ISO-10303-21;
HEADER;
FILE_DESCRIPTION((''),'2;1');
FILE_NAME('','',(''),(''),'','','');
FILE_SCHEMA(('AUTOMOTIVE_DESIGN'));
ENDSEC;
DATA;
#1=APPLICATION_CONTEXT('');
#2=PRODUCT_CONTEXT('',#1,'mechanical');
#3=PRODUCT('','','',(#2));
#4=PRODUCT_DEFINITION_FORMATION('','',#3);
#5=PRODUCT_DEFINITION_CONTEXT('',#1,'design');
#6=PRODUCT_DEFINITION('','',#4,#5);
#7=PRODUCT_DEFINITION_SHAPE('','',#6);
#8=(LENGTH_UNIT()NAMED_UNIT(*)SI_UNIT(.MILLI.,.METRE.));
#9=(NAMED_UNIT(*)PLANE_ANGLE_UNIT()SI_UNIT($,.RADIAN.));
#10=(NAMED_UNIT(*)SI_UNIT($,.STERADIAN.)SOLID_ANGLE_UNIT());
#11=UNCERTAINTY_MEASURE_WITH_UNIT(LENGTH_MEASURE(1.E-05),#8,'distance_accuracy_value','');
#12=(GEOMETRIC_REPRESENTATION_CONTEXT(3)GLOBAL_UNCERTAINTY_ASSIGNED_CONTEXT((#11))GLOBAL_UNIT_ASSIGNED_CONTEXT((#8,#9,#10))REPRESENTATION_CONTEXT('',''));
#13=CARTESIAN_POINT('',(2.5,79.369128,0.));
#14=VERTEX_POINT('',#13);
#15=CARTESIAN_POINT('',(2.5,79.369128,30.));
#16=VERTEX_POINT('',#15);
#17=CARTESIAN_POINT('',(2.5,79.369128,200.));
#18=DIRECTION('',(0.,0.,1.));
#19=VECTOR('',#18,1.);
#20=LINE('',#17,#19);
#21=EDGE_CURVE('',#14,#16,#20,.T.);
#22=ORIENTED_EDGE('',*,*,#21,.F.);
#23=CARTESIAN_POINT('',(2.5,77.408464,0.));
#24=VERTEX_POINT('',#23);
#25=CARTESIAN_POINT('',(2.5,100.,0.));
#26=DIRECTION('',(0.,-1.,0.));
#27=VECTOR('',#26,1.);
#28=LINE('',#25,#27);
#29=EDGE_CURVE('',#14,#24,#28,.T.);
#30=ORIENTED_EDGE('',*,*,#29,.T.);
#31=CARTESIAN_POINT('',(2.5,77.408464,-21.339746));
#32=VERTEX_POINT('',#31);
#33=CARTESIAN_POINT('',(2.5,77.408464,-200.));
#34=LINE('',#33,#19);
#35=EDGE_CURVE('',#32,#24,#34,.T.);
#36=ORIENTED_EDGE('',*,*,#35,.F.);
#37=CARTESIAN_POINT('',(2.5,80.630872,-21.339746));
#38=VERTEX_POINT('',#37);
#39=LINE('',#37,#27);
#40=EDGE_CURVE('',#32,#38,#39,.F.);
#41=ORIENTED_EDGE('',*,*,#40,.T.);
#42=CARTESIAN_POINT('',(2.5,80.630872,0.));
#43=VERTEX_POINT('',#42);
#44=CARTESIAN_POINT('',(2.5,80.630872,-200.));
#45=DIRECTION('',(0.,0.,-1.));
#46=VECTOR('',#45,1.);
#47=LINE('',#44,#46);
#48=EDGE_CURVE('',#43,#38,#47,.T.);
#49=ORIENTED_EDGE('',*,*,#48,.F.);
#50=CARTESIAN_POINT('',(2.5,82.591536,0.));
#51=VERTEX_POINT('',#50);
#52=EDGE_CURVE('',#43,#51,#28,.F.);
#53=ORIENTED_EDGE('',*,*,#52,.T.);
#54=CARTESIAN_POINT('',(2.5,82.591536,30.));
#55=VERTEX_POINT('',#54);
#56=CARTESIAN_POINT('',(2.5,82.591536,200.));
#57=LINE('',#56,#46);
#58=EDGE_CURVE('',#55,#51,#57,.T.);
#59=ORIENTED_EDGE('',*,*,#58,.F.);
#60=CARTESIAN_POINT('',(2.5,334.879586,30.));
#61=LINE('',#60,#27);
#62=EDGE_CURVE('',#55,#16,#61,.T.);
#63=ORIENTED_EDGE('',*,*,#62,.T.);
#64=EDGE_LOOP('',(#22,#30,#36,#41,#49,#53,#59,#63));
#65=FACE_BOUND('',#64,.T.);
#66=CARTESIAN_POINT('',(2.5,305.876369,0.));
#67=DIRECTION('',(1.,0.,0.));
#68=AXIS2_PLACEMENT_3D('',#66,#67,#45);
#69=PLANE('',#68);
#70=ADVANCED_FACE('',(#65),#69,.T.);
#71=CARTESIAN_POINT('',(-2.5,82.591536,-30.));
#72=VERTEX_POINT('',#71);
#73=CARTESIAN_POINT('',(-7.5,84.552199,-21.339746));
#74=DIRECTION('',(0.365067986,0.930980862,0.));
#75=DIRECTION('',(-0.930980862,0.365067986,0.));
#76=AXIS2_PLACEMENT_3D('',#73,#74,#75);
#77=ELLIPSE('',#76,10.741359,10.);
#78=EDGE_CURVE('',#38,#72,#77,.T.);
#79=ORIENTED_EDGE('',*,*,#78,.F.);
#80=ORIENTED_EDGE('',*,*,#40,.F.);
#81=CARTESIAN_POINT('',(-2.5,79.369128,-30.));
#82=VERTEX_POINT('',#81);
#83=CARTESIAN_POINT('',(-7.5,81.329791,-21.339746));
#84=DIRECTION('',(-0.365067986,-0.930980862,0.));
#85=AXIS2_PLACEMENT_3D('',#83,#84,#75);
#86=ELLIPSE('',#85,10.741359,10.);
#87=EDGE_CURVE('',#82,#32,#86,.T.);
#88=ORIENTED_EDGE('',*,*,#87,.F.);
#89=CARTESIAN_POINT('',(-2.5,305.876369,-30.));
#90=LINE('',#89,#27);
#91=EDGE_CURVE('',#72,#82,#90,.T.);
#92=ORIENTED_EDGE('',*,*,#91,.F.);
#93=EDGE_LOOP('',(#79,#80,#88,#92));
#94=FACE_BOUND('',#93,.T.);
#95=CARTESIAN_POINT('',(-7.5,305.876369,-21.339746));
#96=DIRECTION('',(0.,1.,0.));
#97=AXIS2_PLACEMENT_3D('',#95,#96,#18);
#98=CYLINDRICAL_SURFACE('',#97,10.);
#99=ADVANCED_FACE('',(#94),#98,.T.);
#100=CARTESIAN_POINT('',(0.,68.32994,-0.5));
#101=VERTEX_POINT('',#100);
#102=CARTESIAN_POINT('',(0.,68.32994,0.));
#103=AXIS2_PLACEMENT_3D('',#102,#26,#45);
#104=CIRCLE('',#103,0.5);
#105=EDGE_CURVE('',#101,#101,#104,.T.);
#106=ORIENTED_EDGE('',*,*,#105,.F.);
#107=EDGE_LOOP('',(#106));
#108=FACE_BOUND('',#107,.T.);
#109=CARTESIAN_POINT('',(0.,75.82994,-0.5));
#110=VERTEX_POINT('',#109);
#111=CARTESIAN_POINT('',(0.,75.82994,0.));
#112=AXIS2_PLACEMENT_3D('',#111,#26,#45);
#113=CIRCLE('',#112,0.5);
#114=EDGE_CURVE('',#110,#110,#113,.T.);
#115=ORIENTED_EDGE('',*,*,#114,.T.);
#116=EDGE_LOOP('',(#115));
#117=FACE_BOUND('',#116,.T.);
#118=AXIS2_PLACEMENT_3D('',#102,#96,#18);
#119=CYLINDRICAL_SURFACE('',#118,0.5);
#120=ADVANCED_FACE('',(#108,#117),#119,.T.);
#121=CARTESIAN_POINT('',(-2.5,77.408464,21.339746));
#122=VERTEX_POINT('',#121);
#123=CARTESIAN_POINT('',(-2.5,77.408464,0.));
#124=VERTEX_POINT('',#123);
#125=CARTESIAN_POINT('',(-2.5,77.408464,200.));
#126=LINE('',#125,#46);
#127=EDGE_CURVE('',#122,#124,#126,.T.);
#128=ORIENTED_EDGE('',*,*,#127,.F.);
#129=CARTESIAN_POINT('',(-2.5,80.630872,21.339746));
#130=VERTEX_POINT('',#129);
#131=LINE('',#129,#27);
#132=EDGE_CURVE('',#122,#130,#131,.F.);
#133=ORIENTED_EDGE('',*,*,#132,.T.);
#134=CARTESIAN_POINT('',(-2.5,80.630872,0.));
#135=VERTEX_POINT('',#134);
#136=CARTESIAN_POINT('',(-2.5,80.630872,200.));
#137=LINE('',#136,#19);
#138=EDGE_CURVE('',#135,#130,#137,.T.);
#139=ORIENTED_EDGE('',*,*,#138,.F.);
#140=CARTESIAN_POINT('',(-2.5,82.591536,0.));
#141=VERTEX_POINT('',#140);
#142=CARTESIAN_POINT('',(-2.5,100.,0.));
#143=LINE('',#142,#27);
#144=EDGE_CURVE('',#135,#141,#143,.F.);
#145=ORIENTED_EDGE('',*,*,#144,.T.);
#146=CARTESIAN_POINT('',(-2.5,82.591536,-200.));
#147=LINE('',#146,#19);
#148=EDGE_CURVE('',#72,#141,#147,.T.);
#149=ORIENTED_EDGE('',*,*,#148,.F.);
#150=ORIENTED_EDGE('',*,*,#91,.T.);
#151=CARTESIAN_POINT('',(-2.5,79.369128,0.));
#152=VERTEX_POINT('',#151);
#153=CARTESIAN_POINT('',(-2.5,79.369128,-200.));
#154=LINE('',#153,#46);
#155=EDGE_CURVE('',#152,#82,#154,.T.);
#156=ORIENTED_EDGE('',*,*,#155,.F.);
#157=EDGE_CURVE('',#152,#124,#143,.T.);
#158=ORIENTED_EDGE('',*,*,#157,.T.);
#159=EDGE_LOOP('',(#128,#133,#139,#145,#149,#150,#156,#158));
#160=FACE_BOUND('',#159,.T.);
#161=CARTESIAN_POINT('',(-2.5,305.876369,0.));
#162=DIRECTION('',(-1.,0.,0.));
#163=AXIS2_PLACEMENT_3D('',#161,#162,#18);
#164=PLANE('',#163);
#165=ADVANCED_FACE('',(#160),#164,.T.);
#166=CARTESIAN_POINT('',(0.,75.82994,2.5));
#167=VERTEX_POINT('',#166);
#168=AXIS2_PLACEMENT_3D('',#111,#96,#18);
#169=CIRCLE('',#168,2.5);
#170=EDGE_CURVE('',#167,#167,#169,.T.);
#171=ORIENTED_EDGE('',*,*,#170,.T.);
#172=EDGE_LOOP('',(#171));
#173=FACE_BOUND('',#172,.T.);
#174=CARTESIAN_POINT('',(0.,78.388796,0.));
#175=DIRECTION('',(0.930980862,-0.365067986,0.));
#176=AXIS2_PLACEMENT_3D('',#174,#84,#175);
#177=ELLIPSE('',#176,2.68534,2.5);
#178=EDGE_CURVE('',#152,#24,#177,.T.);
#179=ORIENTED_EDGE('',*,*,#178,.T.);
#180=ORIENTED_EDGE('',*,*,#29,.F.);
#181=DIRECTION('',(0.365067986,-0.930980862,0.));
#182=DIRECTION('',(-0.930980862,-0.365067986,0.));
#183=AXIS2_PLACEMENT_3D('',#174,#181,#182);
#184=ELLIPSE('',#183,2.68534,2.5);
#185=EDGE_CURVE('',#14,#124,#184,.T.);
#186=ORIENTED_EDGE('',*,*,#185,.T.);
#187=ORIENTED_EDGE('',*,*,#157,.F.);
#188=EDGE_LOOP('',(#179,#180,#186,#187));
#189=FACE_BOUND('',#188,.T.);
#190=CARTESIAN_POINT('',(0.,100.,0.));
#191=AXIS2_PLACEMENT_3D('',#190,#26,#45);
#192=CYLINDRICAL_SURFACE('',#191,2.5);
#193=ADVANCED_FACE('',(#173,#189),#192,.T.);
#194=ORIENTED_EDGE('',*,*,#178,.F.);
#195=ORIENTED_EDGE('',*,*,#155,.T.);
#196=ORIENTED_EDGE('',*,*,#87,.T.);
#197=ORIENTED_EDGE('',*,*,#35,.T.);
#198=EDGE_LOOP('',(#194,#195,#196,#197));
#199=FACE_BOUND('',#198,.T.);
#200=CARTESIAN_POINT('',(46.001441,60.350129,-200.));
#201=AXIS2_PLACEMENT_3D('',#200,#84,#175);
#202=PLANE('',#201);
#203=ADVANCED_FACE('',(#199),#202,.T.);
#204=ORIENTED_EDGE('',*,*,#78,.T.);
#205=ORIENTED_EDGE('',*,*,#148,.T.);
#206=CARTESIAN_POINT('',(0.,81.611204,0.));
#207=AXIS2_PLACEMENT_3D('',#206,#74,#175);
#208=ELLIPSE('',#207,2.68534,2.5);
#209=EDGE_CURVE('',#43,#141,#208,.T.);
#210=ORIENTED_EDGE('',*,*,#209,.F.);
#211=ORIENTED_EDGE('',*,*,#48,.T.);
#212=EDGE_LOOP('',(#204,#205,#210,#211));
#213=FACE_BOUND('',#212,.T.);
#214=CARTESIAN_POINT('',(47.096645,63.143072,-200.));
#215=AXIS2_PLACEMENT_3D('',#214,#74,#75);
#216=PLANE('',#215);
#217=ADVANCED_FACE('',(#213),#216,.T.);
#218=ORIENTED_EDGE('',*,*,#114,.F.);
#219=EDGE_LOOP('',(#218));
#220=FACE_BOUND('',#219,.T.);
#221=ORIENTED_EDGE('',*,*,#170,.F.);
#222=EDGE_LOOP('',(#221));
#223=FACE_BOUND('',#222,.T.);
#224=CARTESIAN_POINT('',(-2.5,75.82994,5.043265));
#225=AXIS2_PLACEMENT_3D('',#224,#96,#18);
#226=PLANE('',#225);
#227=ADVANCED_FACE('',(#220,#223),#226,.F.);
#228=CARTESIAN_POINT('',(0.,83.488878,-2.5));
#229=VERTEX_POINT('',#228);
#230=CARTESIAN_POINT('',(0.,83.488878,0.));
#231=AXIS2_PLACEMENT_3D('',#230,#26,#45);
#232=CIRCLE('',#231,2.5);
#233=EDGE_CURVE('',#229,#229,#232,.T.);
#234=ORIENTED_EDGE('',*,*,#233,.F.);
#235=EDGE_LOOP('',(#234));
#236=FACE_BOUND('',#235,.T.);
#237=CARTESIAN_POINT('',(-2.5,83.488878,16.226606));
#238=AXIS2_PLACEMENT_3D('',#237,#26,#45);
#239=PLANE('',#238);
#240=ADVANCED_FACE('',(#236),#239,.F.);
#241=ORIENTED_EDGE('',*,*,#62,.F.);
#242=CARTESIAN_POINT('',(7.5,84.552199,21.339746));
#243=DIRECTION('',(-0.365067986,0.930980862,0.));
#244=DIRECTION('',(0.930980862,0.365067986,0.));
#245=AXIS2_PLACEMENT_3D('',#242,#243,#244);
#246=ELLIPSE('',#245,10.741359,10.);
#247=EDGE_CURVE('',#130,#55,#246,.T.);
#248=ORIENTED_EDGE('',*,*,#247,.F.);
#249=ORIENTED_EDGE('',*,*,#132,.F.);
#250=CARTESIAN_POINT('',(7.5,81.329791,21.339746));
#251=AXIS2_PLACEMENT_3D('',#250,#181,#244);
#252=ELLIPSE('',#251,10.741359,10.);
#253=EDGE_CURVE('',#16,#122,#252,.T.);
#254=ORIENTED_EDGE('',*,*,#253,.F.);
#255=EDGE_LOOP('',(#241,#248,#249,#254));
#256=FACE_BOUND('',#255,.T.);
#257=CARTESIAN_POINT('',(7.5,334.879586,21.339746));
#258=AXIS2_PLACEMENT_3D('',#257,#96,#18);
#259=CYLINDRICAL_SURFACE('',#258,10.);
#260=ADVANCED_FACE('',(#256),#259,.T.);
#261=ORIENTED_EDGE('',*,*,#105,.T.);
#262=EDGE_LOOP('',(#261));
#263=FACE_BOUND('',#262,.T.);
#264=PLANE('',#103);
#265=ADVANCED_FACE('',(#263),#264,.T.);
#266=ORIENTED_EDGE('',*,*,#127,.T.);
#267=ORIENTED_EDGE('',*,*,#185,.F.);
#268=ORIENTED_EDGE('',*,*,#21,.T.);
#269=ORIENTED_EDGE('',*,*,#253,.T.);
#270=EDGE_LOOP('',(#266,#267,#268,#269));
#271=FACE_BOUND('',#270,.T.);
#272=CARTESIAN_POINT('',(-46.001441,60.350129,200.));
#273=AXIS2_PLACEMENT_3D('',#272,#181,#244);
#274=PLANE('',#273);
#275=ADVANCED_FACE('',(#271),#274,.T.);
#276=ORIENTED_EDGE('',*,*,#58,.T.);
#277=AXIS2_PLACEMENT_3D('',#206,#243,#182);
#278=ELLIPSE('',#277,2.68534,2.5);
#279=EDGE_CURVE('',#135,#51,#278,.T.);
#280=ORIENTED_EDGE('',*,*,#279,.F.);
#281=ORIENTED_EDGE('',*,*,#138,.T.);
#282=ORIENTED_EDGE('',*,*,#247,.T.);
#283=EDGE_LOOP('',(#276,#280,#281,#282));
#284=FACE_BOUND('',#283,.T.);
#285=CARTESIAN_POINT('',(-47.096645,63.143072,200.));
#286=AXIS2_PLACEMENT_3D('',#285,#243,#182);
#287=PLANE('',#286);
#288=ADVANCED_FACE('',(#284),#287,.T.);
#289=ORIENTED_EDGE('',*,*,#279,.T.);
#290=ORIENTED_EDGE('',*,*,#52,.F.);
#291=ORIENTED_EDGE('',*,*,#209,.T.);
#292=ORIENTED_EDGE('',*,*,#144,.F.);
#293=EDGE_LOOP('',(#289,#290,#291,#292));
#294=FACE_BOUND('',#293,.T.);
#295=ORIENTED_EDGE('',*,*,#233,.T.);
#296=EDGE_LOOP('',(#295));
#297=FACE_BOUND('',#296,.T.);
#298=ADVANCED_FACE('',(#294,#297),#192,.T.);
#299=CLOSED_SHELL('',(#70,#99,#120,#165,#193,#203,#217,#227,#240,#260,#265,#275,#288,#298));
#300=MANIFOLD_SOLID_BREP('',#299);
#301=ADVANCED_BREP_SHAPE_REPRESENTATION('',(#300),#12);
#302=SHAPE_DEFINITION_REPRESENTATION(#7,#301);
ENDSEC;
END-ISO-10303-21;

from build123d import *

# Parameters (mm, degrees)
SKETCH2_R                = 2.5
BOSS_EXTRUDE1_DEPTH      = 100
BOSS_EXTRUDE2_DEPTH      = 200
CUT_EXTRUDE5_START       = 60.350129398
CUT_EXTRUDE5_DEPTH       = 39.299741204
CIRPATTERN2_COUNT        = 2
CUT_EXTRUDE13_START      = 60.350129398
CUT_EXTRUDE13_DEPTH      = 39.299741204
FILLET1_R                = 10
FILLET2_R                = 10
CUT_EXTRUDE14_DEPTH      = 105.432992871
CUT_EXTRUDE14_DEPTH_BACK = 105.432992871
SKETCH14_W               = 44.068346903
SKETCH14_H               = 27.8913588
CUT_EXTRUDE15_DEPTH      = 91.768685539
CUT_EXTRUDE15_DEPTH_BACK = 91.768685539
SKETCH15_W               = 22.136968411
SKETCH15_H               = 5.24183176
CUT_EXTRUDE16_DEPTH      = 89.750452329
CUT_EXTRUDE16_DEPTH_BACK = 89.750452329
SKETCH16_W               = 11.028183549
SKETCH16_H               = 76.248198314
CUT_EXTRUDE17_DEPTH      = 89.750452329
CUT_EXTRUDE17_DEPTH_BACK = 89.750452329
SKETCH19_W               = 10.280501296
SKETCH19_H               = 4.008748932
SKETCH20_R               = 0.5
BOSS_EXTRUDE3_DEPTH      = 7.5


# Read off the part's stored shape, not the designer's step: Cut-Extrude5, Cut-Extrude13
with BuildPart() as part:
    # Sketch2 → Boss-Extrude1 (new body)
    with BuildSketch(Plane(origin=(0, 0, 0), x_dir=(1, 0, 0), z_dir=(0, 1, 0))):
        with Locations(Location((0, 0, 0), (0, 0, 270))):
            Circle(SKETCH2_R)
    extrude(amount=BOSS_EXTRUDE1_DEPTH)

    # Sketch3 → Boss-Extrude2 (add)
    with BuildSketch(Plane.XY):
        Polygon((47.096645081, 63.143071984), (-46.001441122, 99.649870602), (-47.096645081, 96.856928016), (46.001441122, 60.350129398), align=None)
    boss_extrude2 = extrude(amount=-BOSS_EXTRUDE2_DEPTH)

    # Cut-Extrude5 outline → Cut-Extrude5 (cut)
    with BuildSketch(Plane(origin=(0, 0, 0), x_dir=(1, 0, 0), z_dir=(0, 1, 0)).offset(CUT_EXTRUDE5_START)):
        Polygon((-2.5, 0), (-2.5, 30), (2.5, 30), (2.5, 0), (49, 0), (49, 200), (-49, 200), (-49, 0), align=None)
    extrude(amount=CUT_EXTRUDE5_DEPTH, mode=Mode.SUBTRACT)

    # CirPattern2: Boss-Extrude2 ×2 about axis
    cirpattern2_axis = Axis((0, 100, 0), (0, -1, 0))
    for i in range(1, CIRPATTERN2_COUNT):
        add(boss_extrude2.rotate(cirpattern2_axis, i * 360 / CIRPATTERN2_COUNT))

    # Cut-Extrude13 outline → Cut-Extrude13 (cut)
    with BuildSketch(Plane(origin=(0, 0, 0), x_dir=(1, 0, 0), z_dir=(0, 1, 0)).offset(CUT_EXTRUDE13_START)):
        Polygon((-2.5, -30), (-2.5, 0), (-49, 0), (-49, -200), (49, -200), (49, 0), (2.5, 0), (2.5, -30), align=None)
    extrude(amount=CUT_EXTRUDE13_DEPTH, mode=Mode.SUBTRACT)

    # Fillet1
    # the kernel refuses this fillet: 10 mm, written as the material it takes off along each edge
    with BuildSketch(Plane(origin=(2.5, 55.757829393, -30), x_dir=(0, 0, 1), z_dir=(0, 1, 0))) as fillet1_piece_1:
        with BuildLine():
            CenterArc((8.660254038, -10), FILLET1_R, 90, 60)
            Line((0, -5), (-0.173205081, -4.9))
            ThreePointArc((-0.173205081, -4.9), (-0.2, -2.5), (-0.2, 0))
            Line((-0.2, 0), (0, 0.2))
            Line((0, 0.2), (8.660254038, 0.2))
            Line((8.660254038, 0.2), (8.660254038, 0))
        make_face()
    extrude(amount=46.523677998, mode=Mode.SUBTRACT)

    # Fillet2
    # the kernel refuses this fillet: 10 mm, written as the material it takes off along each edge
    with BuildSketch(Plane(origin=(-2.5, 55.757829393, 30), x_dir=(0, 0, -1), z_dir=(0, 1, 0))) as fillet2_piece_1:
        with BuildLine():
            CenterArc((8.660254038, -10), FILLET2_R, 90, 60)
            Line((0, -5), (-0.173205081, -4.9))
            ThreePointArc((-0.173205081, -4.9), (-0.2, -2.5), (-0.2, 0))
            Line((-0.2, 0), (0, 0.2))
            Line((0, 0.2), (8.660254038, 0.2))
            Line((8.660254038, 0.2), (8.660254038, 0))
        make_face()
    extrude(amount=46.523677998, mode=Mode.SUBTRACT)

    # Sketch14 → Cut-Extrude14 (cut, two sides: drawn at the far end of the back side and taken through both)
    with BuildSketch(Plane(origin=(0, 0, 0), x_dir=(0, 0, -1), z_dir=(1, 0, 0)).offset(-CUT_EXTRUDE14_DEPTH_BACK)):
        with Locations((-11.714370696, 99.576890266)):
            Rectangle(SKETCH14_W, SKETCH14_H)
    extrude(amount=CUT_EXTRUDE14_DEPTH + CUT_EXTRUDE14_DEPTH_BACK, mode=Mode.SUBTRACT)

    # Sketch15 → Cut-Extrude15 (cut, two sides: drawn at the far end of the back side and taken through both)
    with BuildSketch(Plane(origin=(0, 0, 0), x_dir=(0, 0, -1), z_dir=(1, 0, 0)).offset(-CUT_EXTRUDE15_DEPTH_BACK)):
        with Locations((-5.158121646, 86.109794113)):
            Rectangle(SKETCH15_W, SKETCH15_H)
    extrude(amount=CUT_EXTRUDE15_DEPTH + CUT_EXTRUDE15_DEPTH_BACK, mode=Mode.SUBTRACT)

    # Sketch16 → Cut-Extrude16 (cut, two sides: drawn at the far end of the back side and taken through both)
    with BuildSketch(Plane(origin=(0, 0, 0), x_dir=(0, 0, -1), z_dir=(1, 0, 0)).offset(-CUT_EXTRUDE16_DEPTH_BACK)):
        with Locations((1.378247022, 35.930712441)):
            Rectangle(SKETCH16_W, SKETCH16_H)
    extrude(amount=CUT_EXTRUDE16_DEPTH + CUT_EXTRUDE16_DEPTH_BACK, mode=Mode.SUBTRACT)

    # Sketch19 → Cut-Extrude17 (cut, two sides: drawn at the far end of the back side and taken through both)
    with BuildSketch(Plane(origin=(0, 0, 0), x_dir=(0, 0, -1), z_dir=(1, 0, 0)).offset(-CUT_EXTRUDE17_DEPTH_BACK)):
        with Locations((0.096985861, 73.82556599)):
            Rectangle(SKETCH19_W, SKETCH19_H)
    extrude(amount=CUT_EXTRUDE17_DEPTH + CUT_EXTRUDE17_DEPTH_BACK, mode=Mode.SUBTRACT)

    # Sketch20 → Boss-Extrude3 (add)
    with BuildSketch(Plane.XZ.offset(-75.829940456)):
        with Locations(Location((0, 0, 0), (0, 0, 270))):
            Circle(SKETCH20_R)
    extrude(amount=BOSS_EXTRUDE3_DEPTH)


solid = part.part
